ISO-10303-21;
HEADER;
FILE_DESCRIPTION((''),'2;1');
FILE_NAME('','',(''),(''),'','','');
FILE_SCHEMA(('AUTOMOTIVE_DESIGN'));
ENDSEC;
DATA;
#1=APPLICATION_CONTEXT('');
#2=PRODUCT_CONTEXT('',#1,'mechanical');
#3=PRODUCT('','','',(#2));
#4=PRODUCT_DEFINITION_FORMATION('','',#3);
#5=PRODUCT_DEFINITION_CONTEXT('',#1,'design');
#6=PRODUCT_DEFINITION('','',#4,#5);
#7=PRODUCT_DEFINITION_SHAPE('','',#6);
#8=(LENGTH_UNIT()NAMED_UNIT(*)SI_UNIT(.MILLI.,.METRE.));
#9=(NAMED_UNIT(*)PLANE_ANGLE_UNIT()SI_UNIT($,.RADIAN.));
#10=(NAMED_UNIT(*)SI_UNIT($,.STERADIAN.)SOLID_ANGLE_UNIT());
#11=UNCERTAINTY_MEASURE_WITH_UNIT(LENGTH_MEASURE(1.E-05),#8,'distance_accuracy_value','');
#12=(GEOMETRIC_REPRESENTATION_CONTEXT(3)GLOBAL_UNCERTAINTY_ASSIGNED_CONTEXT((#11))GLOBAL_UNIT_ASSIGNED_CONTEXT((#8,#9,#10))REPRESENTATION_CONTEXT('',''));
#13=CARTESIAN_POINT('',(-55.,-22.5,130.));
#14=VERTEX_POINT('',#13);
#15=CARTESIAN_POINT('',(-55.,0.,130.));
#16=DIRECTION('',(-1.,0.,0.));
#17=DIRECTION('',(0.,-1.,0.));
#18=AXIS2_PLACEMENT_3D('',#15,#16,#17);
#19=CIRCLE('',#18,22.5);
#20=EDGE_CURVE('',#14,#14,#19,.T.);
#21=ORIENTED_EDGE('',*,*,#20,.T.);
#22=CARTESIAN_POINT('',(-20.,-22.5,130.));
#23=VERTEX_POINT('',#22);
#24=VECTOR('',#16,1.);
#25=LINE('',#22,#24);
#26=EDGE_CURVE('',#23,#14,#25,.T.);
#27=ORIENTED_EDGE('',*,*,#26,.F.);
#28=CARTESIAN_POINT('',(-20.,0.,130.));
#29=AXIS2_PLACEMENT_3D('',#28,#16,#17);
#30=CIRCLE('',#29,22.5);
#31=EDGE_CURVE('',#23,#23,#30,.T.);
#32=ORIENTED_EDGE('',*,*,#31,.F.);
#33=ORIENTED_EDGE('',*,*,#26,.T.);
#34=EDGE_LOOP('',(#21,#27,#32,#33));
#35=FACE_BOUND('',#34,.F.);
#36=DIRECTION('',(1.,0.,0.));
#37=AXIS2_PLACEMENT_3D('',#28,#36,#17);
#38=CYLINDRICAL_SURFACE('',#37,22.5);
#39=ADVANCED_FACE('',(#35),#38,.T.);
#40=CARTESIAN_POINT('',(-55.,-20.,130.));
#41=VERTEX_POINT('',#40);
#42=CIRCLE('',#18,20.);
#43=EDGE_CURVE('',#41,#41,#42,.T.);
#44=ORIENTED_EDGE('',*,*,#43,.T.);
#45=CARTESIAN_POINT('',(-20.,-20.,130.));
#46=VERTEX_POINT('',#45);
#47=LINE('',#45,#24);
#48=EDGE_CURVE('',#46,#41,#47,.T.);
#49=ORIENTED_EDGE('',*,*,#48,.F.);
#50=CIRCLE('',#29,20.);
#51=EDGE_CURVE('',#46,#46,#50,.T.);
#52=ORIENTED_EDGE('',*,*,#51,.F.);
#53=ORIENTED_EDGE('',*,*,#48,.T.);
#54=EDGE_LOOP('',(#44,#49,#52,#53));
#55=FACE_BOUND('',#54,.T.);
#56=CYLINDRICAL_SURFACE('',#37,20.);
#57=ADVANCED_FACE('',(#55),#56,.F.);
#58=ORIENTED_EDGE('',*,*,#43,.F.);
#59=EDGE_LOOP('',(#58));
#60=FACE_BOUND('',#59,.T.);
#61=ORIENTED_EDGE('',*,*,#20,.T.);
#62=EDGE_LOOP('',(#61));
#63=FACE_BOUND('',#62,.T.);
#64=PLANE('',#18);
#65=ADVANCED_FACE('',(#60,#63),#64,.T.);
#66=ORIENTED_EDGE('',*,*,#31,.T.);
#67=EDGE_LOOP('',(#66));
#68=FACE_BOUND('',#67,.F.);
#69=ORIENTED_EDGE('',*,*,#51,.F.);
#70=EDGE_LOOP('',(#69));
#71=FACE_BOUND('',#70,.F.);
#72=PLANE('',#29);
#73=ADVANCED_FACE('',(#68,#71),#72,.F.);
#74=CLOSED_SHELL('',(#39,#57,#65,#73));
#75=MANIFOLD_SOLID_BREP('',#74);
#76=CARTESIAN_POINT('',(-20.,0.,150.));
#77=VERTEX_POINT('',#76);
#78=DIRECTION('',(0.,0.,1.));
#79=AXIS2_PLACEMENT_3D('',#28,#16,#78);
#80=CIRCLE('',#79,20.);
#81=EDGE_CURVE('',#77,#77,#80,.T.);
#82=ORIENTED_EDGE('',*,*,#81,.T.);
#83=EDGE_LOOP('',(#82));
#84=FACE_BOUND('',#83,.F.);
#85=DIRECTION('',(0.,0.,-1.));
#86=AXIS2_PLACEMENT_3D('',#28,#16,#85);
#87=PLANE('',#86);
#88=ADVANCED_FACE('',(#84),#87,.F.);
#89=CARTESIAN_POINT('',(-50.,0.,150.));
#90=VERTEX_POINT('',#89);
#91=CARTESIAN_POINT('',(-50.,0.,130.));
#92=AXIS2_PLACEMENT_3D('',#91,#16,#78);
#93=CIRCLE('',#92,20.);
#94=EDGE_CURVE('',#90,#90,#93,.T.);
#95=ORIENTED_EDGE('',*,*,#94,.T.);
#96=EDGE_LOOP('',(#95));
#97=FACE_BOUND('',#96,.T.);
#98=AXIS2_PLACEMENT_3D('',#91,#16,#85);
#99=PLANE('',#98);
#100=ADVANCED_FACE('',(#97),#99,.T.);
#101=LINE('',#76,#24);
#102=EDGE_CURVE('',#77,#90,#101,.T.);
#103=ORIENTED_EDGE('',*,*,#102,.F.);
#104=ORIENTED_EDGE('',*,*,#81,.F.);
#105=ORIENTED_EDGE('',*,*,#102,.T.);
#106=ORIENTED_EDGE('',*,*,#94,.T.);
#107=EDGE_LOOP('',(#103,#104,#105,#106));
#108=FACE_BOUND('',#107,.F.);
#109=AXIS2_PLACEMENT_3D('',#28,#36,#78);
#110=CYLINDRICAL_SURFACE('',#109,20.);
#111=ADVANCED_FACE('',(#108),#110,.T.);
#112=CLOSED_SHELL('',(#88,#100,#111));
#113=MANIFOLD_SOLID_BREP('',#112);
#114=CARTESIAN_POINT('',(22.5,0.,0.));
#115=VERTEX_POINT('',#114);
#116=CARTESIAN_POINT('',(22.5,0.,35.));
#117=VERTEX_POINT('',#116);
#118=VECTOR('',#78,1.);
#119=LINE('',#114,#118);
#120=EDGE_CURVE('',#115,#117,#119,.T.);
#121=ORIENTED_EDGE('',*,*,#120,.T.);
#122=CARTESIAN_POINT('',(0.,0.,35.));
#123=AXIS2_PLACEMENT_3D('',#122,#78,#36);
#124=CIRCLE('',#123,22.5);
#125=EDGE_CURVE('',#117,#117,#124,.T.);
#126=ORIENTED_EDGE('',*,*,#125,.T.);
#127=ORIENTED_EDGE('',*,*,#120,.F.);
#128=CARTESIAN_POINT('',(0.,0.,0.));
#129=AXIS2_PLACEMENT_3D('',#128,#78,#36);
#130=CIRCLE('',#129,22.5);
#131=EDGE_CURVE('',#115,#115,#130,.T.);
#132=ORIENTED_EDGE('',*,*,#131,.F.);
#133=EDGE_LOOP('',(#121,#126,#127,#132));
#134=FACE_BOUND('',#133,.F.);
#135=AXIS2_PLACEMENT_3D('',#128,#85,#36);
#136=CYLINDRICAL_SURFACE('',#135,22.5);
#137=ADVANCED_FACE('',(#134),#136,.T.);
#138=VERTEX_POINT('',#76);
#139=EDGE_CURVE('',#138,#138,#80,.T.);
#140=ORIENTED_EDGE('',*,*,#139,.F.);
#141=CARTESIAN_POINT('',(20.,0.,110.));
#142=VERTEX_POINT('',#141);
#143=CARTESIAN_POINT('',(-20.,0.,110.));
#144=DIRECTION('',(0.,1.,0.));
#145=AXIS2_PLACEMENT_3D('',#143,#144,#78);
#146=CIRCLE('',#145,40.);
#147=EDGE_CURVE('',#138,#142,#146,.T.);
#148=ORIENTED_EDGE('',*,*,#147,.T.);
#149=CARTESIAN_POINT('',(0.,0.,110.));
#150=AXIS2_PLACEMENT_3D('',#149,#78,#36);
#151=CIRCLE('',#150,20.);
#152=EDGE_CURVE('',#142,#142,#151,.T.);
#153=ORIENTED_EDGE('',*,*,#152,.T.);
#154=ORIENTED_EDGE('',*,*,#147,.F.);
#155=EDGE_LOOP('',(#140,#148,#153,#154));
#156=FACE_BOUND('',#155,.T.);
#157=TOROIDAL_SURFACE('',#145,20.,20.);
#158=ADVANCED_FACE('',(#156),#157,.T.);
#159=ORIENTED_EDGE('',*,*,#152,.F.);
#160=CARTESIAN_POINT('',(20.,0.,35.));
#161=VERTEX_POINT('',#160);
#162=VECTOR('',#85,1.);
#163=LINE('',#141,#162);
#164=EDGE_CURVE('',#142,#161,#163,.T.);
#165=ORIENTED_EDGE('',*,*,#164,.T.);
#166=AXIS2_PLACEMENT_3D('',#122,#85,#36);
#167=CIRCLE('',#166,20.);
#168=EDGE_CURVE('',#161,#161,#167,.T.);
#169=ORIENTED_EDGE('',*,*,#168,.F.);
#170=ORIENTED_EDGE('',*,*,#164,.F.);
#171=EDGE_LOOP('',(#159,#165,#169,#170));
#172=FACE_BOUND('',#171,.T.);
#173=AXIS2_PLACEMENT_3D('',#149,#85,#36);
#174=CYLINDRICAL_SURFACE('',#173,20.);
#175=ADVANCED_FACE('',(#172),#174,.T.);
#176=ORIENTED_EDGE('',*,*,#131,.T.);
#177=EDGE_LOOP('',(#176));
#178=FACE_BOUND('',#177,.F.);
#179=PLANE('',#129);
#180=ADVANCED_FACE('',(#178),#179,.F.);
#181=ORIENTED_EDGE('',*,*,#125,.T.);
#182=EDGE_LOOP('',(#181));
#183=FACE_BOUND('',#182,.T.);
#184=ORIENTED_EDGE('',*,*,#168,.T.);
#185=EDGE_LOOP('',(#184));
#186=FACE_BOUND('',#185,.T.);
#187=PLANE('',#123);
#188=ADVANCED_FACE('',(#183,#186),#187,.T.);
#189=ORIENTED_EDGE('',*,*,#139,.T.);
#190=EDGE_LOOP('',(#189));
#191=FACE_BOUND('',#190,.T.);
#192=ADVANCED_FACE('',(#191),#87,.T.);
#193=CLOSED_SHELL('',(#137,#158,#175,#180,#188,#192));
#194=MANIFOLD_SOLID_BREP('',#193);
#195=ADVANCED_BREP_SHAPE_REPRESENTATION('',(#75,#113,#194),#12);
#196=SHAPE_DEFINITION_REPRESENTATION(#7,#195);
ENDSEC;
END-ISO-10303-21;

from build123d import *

# Parameters (mm, degrees)
F1_R     = 20
F3_R     = 22.5
F4_DEPTH = 35
F5_R     = 22.5
F5_R_2   = 20
F6_DEPTH = 35
F7_DEPTH = 30


with BuildPart() as f2:
    # F2: sweep along a path in F0
    with BuildLine(Plane.XZ) as f2_path:
        ThreePointArc((-20, 130), (-5.8578643763, 124.1421356237), (0, 110))
        Line((0, 110), (0, 0))
    # F1 (on Top) → F2 (sweep)
    with BuildSketch(Plane.XY):
        Circle(F1_R)
    sweep(path=f2_path.line)

    # F3 (on Top) → F4 (join)
    with BuildSketch(Plane.XY):
        Circle(F3_R)
    extrude(amount=F4_DEPTH)


with BuildPart() as f6:
    # F5 (on face) → F6 (new body)
    with BuildSketch(Plane(origin=(-20, 0, 0), x_dir=(0, -1, 0), z_dir=(-1, 0, 0))):
        with Locations((0, 130)):
            Circle(F5_R)
        with Locations((0, 130)):
            Circle(F5_R_2, mode=Mode.SUBTRACT)
    extrude(amount=F6_DEPTH)


with BuildPart() as f7:
    # F7 (new): a face of the model
    f7_faces = [f2.part.faces().sort_by_distance(p)[0] for p in [
        (-20, 0, 130),
    ]]
    extrude(f7_faces, amount=F7_DEPTH)


solid = Compound([f2.part, f6.part, f7.part])
